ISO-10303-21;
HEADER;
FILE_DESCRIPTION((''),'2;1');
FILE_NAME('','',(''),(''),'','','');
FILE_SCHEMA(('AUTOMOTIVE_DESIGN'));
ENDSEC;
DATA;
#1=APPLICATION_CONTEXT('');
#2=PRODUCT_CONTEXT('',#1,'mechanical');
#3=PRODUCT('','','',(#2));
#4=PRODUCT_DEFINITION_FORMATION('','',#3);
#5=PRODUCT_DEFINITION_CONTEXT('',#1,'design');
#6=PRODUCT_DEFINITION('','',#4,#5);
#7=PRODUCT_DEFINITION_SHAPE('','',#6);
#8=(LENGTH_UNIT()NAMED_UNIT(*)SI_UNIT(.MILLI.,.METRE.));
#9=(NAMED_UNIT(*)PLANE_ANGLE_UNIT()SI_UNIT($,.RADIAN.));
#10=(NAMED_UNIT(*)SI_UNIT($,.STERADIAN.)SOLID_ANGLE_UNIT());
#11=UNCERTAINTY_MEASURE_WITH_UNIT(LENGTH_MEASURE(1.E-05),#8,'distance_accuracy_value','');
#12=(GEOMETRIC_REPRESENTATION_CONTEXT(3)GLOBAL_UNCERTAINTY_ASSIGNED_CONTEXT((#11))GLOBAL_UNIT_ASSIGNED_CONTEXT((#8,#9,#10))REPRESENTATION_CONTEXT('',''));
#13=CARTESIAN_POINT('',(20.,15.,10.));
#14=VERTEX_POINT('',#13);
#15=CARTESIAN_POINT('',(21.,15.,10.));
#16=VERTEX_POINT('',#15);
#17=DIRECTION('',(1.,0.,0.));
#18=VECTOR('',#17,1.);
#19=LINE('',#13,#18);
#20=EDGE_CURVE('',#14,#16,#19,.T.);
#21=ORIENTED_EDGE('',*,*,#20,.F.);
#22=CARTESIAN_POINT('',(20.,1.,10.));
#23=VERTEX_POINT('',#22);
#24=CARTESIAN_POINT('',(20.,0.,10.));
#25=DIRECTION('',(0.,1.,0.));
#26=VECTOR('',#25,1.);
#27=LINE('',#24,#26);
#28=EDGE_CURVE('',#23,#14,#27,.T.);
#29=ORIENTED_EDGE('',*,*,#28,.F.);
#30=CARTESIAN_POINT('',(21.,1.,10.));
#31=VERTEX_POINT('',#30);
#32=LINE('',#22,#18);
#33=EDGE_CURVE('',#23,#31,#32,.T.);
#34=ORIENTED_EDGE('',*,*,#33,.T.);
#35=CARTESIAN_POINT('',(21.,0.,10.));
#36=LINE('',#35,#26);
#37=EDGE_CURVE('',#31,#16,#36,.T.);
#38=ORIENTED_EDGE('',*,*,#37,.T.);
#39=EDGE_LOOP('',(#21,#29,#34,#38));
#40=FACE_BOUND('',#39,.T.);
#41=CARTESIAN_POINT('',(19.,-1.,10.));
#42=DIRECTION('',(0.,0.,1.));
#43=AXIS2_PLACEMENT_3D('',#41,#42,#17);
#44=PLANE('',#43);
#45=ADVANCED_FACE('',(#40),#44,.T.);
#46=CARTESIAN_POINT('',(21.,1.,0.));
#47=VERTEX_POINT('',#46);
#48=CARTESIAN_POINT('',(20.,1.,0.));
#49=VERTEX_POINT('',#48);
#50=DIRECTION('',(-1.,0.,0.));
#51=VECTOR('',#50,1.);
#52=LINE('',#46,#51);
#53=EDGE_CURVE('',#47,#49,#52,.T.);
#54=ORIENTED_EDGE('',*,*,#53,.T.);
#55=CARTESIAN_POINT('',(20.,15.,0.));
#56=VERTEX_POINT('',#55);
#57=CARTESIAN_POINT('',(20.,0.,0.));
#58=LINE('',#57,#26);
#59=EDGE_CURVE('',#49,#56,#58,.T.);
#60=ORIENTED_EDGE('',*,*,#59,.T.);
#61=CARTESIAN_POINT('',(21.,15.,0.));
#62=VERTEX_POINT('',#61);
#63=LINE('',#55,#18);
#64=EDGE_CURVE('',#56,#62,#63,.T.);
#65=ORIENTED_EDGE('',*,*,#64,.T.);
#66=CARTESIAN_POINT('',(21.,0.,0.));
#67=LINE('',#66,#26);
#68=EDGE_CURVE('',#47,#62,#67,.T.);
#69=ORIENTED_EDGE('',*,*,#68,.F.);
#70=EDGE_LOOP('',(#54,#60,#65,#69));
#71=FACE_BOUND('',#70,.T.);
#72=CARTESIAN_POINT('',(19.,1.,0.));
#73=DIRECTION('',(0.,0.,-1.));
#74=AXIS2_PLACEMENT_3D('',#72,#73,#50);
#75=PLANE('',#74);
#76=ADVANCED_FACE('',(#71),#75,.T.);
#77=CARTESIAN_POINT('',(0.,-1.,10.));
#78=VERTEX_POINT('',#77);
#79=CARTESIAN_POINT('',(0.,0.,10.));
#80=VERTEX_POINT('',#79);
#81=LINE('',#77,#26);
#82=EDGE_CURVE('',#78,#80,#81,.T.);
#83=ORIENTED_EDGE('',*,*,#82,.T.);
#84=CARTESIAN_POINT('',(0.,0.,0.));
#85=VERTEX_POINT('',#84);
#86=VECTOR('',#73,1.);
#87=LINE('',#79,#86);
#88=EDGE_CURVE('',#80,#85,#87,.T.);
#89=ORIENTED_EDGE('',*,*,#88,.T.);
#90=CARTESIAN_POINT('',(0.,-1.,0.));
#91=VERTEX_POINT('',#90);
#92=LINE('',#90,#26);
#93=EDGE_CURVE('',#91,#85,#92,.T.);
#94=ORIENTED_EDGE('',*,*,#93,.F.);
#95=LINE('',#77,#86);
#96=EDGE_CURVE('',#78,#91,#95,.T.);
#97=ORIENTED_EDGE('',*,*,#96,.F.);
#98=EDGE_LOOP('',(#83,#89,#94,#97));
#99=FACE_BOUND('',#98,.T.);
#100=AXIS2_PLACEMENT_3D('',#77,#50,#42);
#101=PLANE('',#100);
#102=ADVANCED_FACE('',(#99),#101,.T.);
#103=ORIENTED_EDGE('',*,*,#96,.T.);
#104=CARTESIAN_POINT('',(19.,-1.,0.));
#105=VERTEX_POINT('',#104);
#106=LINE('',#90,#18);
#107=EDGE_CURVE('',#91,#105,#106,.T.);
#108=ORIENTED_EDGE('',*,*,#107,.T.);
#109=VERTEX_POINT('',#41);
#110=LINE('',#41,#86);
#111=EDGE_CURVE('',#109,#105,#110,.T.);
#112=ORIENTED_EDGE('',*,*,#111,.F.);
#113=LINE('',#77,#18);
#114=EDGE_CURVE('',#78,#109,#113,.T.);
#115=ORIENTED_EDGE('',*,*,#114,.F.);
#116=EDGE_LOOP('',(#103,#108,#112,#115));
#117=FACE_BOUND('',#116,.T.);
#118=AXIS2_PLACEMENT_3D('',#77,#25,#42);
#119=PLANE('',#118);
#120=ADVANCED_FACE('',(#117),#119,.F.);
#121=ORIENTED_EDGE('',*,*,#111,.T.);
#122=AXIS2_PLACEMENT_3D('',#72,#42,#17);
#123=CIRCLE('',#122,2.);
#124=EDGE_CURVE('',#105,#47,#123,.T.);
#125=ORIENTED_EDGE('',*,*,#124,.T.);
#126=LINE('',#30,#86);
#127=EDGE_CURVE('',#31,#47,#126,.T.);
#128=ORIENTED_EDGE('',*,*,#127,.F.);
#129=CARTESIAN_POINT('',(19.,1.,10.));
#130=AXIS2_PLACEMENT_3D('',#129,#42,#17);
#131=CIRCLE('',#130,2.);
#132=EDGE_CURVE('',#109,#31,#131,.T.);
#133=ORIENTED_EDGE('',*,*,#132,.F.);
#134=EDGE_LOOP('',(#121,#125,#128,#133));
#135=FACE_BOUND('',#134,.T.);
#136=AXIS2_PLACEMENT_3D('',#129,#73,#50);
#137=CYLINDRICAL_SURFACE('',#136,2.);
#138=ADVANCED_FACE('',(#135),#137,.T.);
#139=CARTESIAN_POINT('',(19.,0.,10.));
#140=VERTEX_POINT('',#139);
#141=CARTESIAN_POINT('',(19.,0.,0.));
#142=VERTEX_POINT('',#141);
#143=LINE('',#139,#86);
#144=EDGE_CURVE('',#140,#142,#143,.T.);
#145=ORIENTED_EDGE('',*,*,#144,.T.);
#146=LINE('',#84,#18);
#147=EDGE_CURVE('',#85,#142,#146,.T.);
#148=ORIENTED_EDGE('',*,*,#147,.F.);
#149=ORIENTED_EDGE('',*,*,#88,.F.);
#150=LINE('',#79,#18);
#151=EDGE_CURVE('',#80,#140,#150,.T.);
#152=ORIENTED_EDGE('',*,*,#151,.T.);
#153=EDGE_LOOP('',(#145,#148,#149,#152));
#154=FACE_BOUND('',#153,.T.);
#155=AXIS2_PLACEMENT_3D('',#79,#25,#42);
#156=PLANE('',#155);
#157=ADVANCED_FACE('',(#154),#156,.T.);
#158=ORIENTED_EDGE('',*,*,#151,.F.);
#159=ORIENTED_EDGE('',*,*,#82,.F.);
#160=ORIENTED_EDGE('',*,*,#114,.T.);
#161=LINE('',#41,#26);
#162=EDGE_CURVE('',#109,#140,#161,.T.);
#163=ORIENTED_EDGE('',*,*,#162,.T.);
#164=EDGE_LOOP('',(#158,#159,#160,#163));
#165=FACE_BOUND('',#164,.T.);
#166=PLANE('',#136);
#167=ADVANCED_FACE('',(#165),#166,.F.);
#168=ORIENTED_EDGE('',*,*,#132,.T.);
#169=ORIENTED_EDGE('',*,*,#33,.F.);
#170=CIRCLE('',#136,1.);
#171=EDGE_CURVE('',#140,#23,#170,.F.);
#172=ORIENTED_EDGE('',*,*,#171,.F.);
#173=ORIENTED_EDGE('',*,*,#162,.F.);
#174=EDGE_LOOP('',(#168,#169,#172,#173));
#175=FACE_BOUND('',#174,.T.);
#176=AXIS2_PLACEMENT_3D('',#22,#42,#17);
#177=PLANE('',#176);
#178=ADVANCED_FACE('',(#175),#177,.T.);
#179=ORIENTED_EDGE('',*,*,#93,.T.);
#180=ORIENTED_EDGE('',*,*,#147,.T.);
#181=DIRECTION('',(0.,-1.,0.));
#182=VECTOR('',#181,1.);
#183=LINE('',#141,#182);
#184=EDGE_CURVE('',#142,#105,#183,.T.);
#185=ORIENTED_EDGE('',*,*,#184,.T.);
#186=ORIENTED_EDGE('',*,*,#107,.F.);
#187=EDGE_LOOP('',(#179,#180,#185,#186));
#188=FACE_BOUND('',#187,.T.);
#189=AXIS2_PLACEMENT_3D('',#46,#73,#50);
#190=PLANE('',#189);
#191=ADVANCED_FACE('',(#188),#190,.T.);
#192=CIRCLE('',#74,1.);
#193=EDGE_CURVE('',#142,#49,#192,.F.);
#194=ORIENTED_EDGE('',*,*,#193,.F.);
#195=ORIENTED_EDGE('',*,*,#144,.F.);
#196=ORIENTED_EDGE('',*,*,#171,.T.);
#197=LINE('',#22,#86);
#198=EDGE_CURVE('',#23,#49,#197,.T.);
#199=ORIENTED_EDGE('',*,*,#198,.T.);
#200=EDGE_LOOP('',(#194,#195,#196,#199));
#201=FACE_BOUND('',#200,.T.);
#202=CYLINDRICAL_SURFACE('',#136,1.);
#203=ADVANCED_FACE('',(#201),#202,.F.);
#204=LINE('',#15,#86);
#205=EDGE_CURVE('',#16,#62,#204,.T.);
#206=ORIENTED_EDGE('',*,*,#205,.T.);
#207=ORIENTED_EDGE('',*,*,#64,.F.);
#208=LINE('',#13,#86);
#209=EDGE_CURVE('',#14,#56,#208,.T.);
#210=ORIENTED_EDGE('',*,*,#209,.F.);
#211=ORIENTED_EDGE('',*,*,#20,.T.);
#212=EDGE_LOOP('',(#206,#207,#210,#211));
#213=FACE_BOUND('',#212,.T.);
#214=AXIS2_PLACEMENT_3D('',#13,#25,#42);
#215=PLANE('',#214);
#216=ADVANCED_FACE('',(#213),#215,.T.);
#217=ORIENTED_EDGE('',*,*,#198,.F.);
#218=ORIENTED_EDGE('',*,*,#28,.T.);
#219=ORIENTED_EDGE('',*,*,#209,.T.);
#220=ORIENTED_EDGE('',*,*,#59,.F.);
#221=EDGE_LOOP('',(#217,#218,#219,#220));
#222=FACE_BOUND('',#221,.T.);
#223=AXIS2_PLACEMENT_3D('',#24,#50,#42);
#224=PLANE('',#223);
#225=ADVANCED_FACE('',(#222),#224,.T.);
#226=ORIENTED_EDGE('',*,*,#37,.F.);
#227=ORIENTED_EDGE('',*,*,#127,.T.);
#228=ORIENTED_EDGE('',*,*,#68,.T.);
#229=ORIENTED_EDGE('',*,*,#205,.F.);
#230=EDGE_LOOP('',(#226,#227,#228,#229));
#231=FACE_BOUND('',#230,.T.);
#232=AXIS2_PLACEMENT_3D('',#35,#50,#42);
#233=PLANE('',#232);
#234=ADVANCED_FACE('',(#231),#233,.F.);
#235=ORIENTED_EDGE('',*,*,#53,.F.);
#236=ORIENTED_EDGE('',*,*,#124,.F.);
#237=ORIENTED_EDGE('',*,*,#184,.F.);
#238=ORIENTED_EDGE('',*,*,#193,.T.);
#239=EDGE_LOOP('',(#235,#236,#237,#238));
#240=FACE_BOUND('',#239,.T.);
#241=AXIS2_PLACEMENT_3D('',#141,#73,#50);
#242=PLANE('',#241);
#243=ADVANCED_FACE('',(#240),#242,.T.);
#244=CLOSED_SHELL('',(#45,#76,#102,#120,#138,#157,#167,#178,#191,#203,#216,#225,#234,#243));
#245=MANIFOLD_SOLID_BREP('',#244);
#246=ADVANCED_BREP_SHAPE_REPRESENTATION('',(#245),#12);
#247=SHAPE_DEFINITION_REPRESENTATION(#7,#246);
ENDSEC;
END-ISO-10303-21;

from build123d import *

# Parameters (mm, degrees)
SM_BASE_FLANGE_1_DEPTH = 10


# Sheet-metal steps are written as plain solids
with BuildPart() as part:
    # Sketch 1 → 基体-法兰1 (new body)
    with BuildSketch(Plane.XY):
        with BuildLine():
            Line((0, 0), (19, 0))
            ThreePointArc((19, 0), (19.707106781, 0.292893219), (20, 1))
            Line((20, 1), (20, 15))
            Line((20, 15), (21, 15))
            Line((21, 15), (21, 1))
            ThreePointArc((21, 1), (20.414213562, -0.414213562), (19, -1))
            Line((19, -1), (0, -1))
            Line((0, -1), (0, 0))
        make_face()
    extrude(amount=SM_BASE_FLANGE_1_DEPTH)


solid = part.part
